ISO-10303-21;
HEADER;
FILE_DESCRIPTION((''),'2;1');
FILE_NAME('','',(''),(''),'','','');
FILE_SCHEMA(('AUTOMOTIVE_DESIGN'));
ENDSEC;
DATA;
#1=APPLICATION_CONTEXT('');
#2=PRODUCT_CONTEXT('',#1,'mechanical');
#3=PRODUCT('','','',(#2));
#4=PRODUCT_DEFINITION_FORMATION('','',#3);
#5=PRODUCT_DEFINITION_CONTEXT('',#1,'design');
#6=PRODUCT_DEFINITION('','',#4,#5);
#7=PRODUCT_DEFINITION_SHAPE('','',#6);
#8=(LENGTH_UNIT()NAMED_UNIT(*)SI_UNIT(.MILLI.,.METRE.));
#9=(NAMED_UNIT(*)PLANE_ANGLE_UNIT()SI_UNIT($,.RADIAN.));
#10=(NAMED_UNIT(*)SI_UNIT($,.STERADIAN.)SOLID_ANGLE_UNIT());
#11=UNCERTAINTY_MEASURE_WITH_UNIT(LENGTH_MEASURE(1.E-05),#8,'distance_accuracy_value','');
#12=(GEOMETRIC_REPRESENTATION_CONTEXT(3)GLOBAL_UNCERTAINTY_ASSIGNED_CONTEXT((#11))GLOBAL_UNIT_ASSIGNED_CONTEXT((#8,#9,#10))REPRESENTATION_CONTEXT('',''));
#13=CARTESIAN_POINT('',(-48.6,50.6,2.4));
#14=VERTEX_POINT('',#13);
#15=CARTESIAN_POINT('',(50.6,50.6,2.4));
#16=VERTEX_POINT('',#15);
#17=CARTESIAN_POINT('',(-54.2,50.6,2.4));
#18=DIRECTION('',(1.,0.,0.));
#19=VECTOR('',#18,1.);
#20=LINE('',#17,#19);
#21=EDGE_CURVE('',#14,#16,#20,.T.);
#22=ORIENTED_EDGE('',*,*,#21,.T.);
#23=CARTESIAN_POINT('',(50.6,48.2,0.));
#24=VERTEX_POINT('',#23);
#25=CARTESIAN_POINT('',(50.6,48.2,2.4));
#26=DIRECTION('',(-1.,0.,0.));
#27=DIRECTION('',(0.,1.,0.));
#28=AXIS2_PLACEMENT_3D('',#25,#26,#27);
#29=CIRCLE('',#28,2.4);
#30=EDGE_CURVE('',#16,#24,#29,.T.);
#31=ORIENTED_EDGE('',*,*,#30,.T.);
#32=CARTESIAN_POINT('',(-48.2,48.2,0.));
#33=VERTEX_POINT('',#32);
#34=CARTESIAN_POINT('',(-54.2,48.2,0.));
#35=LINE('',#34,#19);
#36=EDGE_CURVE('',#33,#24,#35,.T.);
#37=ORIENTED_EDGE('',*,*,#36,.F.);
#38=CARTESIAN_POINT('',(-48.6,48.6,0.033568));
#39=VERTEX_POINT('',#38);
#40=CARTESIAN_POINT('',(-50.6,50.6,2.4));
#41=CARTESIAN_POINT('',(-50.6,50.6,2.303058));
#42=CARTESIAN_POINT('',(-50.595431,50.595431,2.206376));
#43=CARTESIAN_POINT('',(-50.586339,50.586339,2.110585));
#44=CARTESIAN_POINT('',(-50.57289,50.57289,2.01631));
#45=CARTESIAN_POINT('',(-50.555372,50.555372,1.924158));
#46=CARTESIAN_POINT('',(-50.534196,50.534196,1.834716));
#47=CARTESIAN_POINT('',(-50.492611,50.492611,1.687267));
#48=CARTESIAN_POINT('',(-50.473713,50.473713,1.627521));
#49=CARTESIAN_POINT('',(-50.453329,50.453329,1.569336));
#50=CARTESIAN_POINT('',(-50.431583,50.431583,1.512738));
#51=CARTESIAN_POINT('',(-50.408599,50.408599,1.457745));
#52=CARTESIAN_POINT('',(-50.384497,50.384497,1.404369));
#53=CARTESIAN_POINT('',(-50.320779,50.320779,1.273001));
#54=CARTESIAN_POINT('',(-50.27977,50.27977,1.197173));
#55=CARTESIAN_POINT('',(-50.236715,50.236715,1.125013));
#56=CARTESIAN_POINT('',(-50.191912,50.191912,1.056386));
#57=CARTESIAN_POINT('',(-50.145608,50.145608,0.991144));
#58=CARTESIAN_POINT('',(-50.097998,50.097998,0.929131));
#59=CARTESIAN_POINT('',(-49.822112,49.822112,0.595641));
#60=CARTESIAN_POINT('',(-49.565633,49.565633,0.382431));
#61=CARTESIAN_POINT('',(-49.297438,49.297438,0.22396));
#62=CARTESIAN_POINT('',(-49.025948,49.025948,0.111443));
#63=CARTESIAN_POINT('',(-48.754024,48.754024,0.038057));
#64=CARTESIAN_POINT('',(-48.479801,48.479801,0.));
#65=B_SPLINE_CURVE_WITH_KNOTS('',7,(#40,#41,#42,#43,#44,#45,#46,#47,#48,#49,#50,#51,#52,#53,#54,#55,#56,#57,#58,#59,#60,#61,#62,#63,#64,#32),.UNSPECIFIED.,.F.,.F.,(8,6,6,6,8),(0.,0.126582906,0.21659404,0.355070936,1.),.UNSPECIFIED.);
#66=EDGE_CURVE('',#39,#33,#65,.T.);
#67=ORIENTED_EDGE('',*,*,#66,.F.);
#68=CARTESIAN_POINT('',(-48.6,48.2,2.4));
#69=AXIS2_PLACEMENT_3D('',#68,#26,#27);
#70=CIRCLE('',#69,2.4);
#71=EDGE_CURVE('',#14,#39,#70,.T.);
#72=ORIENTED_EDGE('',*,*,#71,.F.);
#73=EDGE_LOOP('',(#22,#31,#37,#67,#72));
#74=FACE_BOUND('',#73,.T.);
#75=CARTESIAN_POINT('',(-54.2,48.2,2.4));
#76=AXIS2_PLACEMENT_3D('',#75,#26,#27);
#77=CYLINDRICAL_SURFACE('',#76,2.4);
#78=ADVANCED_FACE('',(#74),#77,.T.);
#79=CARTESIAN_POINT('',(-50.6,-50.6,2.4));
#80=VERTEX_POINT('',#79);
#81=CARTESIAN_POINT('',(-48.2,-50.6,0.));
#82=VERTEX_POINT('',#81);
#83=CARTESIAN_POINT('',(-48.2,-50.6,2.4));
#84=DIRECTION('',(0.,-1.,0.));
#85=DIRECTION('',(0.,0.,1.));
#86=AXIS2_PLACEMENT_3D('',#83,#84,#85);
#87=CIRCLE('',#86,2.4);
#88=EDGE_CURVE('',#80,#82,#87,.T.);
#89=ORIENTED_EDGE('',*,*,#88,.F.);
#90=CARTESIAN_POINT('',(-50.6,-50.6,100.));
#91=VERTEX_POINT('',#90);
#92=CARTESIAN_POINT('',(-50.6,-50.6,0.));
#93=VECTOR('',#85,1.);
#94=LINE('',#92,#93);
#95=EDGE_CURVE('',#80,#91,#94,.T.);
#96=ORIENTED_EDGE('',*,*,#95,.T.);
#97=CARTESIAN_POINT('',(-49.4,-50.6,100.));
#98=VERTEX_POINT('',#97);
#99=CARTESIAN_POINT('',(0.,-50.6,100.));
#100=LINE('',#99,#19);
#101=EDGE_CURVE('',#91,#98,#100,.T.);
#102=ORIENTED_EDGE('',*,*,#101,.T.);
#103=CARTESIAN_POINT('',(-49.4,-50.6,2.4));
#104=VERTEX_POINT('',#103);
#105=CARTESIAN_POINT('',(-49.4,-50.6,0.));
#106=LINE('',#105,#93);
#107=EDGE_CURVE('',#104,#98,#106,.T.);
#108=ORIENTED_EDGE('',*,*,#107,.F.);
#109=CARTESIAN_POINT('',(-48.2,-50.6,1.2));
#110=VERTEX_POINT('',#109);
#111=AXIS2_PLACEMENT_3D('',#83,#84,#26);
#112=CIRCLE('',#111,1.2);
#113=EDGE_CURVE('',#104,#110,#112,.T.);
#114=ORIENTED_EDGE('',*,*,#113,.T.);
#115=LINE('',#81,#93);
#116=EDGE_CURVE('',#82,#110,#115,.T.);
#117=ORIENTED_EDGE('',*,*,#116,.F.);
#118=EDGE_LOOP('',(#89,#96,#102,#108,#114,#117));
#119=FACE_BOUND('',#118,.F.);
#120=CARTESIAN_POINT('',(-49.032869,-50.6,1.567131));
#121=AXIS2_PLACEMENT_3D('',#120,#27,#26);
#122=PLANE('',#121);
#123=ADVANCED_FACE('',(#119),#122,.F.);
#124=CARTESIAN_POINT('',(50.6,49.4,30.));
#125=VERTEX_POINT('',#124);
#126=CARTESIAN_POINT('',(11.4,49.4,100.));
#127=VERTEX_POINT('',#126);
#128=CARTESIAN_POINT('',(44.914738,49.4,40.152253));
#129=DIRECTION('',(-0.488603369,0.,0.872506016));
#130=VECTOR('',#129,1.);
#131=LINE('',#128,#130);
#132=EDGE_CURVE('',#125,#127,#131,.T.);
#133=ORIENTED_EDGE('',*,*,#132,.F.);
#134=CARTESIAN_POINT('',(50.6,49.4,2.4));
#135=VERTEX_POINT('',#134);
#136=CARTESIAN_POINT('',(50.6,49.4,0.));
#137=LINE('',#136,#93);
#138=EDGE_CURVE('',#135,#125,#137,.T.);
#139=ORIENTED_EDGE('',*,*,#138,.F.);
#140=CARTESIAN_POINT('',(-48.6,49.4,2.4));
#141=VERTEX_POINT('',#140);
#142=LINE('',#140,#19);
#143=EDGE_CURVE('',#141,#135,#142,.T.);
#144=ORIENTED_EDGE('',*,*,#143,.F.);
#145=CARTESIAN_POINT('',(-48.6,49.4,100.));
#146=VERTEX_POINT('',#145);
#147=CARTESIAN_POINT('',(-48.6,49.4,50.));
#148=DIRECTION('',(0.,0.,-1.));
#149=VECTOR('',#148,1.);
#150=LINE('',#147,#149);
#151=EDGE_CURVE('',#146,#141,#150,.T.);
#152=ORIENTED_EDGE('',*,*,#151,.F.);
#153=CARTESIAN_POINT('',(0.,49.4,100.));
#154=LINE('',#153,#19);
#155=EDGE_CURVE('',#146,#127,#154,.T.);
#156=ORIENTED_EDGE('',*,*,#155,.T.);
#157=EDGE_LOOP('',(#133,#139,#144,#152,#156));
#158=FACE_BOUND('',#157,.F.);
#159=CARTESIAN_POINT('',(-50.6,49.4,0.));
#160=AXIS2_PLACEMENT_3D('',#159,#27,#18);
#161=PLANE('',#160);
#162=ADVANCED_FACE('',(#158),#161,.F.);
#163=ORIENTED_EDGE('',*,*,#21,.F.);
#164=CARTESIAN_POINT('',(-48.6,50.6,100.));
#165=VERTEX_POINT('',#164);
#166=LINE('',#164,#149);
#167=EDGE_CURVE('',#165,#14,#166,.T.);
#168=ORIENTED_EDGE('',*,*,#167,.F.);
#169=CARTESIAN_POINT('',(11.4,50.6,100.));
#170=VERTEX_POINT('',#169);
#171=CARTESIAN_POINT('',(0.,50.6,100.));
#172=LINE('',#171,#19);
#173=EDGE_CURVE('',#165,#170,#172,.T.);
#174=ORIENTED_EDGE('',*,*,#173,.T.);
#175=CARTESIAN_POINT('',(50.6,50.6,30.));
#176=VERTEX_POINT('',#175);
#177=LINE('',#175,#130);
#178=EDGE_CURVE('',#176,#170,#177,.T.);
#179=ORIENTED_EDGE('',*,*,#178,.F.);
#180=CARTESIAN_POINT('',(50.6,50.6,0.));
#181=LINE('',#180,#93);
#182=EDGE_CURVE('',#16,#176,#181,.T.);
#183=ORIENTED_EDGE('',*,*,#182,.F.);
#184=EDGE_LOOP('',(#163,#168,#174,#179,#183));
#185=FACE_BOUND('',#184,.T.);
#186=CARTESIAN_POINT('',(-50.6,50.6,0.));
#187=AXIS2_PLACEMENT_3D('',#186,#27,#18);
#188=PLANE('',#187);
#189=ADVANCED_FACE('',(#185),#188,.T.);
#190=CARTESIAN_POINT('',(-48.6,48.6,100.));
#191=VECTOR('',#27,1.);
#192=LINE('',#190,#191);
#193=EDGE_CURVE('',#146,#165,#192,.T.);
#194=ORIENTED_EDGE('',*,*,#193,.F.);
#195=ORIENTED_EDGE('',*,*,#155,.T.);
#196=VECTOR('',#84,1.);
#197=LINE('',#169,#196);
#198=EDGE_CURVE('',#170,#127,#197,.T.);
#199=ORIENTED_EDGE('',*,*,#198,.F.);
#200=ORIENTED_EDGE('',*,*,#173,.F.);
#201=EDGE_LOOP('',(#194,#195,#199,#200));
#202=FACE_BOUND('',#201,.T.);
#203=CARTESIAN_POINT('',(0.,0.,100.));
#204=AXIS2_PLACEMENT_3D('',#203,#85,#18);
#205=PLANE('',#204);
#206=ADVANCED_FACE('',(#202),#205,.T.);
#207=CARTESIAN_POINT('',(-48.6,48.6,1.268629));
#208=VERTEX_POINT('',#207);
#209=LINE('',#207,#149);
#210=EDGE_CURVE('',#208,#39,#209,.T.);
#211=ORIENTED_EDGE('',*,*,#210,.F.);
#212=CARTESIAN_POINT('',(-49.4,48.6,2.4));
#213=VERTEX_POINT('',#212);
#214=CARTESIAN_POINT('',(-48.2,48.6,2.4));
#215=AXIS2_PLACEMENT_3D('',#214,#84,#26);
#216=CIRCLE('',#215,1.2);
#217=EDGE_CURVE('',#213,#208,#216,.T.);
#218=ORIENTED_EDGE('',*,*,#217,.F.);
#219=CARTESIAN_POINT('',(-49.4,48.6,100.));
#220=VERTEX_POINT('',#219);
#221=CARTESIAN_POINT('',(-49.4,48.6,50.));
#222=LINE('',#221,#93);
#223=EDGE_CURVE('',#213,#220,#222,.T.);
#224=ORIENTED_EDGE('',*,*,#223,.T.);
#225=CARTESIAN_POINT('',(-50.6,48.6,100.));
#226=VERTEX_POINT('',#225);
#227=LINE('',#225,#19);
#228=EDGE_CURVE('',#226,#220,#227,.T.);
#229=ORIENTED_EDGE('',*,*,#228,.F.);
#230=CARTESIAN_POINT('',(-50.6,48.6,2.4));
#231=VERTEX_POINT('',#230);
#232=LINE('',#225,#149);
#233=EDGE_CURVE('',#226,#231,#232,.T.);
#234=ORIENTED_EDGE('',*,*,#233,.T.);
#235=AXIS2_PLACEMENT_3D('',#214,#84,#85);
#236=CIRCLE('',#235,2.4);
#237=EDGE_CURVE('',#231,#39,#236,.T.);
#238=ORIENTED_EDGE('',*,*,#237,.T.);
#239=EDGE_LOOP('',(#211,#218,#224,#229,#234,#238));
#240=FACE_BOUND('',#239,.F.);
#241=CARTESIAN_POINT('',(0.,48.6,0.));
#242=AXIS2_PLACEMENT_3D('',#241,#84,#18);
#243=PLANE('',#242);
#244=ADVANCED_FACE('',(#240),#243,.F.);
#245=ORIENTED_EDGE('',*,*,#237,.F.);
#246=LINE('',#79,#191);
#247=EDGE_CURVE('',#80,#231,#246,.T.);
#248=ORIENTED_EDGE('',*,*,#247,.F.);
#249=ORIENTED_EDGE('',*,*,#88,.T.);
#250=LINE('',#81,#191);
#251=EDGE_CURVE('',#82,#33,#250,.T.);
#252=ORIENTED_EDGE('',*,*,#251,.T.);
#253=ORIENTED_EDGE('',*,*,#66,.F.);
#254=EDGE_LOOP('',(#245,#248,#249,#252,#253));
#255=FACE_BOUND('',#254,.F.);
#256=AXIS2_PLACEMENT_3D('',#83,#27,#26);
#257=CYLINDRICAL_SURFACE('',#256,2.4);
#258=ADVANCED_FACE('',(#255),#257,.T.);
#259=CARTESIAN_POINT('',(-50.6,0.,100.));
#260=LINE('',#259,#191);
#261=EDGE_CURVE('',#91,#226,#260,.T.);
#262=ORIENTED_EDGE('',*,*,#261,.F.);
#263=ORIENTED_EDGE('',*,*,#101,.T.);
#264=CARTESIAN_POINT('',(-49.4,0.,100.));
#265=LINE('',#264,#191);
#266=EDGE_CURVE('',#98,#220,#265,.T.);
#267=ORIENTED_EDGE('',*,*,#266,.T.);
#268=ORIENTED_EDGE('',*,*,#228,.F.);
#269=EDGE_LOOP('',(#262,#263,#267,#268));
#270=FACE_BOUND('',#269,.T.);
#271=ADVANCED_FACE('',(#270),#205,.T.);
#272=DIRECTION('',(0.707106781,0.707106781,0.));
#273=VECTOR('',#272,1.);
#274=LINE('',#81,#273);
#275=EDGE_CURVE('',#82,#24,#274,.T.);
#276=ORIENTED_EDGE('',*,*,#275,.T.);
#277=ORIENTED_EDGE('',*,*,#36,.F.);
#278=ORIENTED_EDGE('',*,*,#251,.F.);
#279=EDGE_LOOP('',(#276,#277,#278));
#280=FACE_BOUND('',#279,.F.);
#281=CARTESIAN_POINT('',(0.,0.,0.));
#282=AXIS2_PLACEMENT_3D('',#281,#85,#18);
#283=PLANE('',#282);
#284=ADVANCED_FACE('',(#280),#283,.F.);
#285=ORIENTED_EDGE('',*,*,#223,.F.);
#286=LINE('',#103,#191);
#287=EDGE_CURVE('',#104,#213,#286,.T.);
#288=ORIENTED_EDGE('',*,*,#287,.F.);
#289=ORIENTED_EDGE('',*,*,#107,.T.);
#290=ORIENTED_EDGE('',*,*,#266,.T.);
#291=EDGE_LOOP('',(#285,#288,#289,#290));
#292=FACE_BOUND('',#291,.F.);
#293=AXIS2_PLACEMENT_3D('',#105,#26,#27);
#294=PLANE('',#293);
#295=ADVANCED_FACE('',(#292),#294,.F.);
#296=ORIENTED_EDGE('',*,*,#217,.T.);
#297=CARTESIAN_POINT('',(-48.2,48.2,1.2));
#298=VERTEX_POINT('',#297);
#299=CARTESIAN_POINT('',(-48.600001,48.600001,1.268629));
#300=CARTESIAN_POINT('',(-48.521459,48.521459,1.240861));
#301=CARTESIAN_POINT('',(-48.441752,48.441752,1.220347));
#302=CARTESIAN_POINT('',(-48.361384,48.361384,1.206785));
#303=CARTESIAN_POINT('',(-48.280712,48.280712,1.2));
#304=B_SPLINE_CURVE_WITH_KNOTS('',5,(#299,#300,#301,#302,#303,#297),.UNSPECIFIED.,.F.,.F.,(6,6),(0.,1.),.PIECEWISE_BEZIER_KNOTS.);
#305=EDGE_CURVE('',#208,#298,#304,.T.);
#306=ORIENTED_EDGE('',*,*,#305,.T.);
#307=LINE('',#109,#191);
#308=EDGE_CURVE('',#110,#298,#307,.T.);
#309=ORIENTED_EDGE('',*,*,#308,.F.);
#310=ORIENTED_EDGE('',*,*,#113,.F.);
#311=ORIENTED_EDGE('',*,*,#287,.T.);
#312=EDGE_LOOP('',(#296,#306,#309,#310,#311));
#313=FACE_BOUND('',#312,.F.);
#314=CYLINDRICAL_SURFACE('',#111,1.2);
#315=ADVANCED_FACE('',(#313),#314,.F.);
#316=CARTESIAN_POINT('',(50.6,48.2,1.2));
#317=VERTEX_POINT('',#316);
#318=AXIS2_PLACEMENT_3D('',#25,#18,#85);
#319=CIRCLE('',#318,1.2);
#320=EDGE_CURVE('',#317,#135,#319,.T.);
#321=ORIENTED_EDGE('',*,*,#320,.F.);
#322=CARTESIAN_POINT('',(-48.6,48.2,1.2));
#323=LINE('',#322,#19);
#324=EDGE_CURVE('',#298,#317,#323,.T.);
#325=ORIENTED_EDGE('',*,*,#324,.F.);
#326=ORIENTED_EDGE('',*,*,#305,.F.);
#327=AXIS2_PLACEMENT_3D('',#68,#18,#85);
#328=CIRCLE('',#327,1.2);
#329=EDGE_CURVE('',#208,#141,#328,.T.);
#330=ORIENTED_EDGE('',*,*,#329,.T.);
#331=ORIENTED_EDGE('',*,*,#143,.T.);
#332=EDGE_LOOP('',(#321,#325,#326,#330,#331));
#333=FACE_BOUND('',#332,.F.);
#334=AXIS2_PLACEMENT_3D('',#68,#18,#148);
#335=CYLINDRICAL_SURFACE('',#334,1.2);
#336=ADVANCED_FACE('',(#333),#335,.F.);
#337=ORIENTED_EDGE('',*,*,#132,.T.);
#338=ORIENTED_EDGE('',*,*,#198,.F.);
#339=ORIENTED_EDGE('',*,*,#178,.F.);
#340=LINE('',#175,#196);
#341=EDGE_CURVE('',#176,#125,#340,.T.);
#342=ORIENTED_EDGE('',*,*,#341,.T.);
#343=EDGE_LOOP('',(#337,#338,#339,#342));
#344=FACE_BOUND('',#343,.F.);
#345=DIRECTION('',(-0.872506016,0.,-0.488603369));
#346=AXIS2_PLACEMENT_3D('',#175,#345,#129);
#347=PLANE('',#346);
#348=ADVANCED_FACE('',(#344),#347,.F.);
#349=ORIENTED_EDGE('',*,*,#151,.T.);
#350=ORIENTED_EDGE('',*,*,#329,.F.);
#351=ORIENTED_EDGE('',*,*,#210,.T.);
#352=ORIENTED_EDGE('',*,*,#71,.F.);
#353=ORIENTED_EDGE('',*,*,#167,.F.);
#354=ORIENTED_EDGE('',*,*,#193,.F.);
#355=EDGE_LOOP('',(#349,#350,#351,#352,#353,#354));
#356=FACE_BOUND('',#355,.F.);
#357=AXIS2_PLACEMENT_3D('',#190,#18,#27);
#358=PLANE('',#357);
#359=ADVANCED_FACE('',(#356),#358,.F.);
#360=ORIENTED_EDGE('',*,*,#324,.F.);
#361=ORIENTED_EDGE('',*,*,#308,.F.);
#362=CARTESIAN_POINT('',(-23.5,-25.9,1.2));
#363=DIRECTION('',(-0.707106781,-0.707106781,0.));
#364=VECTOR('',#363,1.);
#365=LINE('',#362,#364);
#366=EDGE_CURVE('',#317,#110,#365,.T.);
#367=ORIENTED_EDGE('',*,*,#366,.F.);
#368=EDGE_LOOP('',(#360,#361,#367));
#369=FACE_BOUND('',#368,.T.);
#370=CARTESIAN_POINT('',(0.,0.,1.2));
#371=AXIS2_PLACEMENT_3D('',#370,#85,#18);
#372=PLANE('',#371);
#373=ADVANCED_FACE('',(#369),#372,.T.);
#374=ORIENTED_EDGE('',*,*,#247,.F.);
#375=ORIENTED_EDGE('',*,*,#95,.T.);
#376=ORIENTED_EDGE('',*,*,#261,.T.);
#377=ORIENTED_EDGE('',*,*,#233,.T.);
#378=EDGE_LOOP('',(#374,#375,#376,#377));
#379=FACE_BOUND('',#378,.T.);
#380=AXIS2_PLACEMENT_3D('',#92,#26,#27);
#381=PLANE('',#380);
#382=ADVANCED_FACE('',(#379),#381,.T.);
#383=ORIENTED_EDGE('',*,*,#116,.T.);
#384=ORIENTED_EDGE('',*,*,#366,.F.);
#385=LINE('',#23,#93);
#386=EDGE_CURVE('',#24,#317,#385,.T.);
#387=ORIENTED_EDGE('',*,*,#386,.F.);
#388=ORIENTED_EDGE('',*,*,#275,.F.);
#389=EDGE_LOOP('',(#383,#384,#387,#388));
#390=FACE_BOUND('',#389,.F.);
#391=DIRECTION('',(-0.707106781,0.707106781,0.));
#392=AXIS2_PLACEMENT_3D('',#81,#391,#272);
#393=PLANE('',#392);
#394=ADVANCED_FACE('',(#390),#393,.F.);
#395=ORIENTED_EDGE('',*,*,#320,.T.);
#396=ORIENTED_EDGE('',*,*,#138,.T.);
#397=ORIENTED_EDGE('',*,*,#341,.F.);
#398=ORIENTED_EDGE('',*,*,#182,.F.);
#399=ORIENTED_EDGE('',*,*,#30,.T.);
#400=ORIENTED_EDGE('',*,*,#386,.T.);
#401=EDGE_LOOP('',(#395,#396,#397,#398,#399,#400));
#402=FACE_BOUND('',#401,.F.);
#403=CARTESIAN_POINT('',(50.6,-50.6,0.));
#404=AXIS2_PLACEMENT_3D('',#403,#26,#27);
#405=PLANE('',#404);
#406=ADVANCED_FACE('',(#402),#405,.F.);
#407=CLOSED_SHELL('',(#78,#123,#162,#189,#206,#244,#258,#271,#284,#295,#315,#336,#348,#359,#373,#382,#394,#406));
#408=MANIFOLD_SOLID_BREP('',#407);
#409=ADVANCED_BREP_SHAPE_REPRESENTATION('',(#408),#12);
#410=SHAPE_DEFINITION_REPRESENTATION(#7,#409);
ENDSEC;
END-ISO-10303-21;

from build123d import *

# Parameters (mm, degrees)
F0_W        = 101.2
F0_H        = 101.2
F1_DEPTH    = 100
F2_T        = -1.2
F4_W        = 0.8
F4_H        = 0.8
F5_DEPTH    = 100.001
F6_R        = 1.2
F7_T4_DEPTH = 101.8
F8_R        = 2.4
F9_T1_DEPTH = 110.8
F12_DEPTH   = 25
F14_DEPTH   = 25


# Not quite as in the source:
# - a fillet or chamfer that OpenCascade refuses, or shapes differently, is made with other operations: its cross-section is extruded or revolved along the edge and cut away or added


with BuildPart() as f1:
    # F0 (on Top) → F1 (new body)
    with BuildSketch(Plane.XY):
        Rectangle(F0_W, F0_H)
    extrude(amount=F1_DEPTH)

    # F2
    f2_openings = [f1.faces().sort_by_distance(p)[0] for p in [
        (0, 0, 100),
        (0, -50.6, 50),
        (50.6, 0, 50),
    ]]
    offset(amount=F2_T, openings=f2_openings)

    # F4 (on face) → F5 (cut, through all)
    with BuildSketch(Plane.XY.offset(100)):
        with Locations((-49, 49)):
            Rectangle(F4_W, F4_H)
        Polygon((-50.6, 50.6), (-50.6, 48.6), (-49.4, 48.6), (-49.4, 49.4), (-48.6, 49.4), (-48.6, 50.6), align=None)
    extrude(amount=-F5_DEPTH, mode=Mode.SUBTRACT)

    # F6
    f6_edges = [f1.edges().sort_by_distance(p)[0] for p in [
        (1, 49.4, 1.2),
    ]]
    fillet(f6_edges, radius=F6_R)

    # F7: fillet of radius 1.2 on 1 edges, made by hand


with BuildPart() as f7_tool2:
    # F7_s3 → F7_t4 (new body)
    with BuildSketch(Plane.XZ.offset(50.6)):
        with BuildLine():
            ThreePointArc((-49.4, 2.4), (-49.0485281374, 1.5514718626), (-48.2, 1.2))
            Line((-48.2, 1.2), (-49.4, 1.2))
            Line((-49.4, 1.2), (-49.4, 2.4))
        make_face()
    extrude(amount=-F7_T4_DEPTH)

    split(bisect_by=Plane.XZ.offset(-48.6), keep=Keep.TOP)


with BuildPart() as f1_1:
    add(f1.part)

    # F7_t1: union F7_tool2
    add(f7_tool2.part)

    # F8
    f8_edges = [f1_1.edges().sort_by_distance(p)[0] for p in [
        (-50.6, -1, 0),
    ]]
    fillet(f8_edges, radius=F8_R)

    # F9: fillet of radius 2.4 on 1 edges, made by hand

    # F9_s2 → F9_t1 (cut)
    with BuildSketch(Plane.YZ.offset(-54.2)):
        with BuildLine():
            ThreePointArc((50.6, 2.4), (49.8970562748, 0.7029437252), (48.2, 0))
            Line((48.2, 0), (50.6, 0))
            Line((50.6, 0), (50.6, 2.4))
        make_face()
    extrude(amount=F9_T1_DEPTH, mode=Mode.SUBTRACT)

    # F11 (on face) → F12 (cut)
    with BuildSketch(Plane(origin=(0, 50.6, 0), x_dir=(-1, 0, 0), z_dir=(0, 1, 0))):
        Polygon((-11.4, 100), (-50.6, 100), (-50.6, 30), align=None)
    extrude(amount=-F12_DEPTH, mode=Mode.SUBTRACT)

    # F13 (on face) → F14 (cut)
    with BuildSketch(Plane(origin=(0, 0, 0), x_dir=(1, 0, 0), z_dir=(0, 0, -1))):
        Polygon((50.6, -48.2), (50.6, 50.6), (-48.2, 50.6), align=None)
    extrude(amount=-F14_DEPTH, mode=Mode.SUBTRACT)


solid = f1_1.part
